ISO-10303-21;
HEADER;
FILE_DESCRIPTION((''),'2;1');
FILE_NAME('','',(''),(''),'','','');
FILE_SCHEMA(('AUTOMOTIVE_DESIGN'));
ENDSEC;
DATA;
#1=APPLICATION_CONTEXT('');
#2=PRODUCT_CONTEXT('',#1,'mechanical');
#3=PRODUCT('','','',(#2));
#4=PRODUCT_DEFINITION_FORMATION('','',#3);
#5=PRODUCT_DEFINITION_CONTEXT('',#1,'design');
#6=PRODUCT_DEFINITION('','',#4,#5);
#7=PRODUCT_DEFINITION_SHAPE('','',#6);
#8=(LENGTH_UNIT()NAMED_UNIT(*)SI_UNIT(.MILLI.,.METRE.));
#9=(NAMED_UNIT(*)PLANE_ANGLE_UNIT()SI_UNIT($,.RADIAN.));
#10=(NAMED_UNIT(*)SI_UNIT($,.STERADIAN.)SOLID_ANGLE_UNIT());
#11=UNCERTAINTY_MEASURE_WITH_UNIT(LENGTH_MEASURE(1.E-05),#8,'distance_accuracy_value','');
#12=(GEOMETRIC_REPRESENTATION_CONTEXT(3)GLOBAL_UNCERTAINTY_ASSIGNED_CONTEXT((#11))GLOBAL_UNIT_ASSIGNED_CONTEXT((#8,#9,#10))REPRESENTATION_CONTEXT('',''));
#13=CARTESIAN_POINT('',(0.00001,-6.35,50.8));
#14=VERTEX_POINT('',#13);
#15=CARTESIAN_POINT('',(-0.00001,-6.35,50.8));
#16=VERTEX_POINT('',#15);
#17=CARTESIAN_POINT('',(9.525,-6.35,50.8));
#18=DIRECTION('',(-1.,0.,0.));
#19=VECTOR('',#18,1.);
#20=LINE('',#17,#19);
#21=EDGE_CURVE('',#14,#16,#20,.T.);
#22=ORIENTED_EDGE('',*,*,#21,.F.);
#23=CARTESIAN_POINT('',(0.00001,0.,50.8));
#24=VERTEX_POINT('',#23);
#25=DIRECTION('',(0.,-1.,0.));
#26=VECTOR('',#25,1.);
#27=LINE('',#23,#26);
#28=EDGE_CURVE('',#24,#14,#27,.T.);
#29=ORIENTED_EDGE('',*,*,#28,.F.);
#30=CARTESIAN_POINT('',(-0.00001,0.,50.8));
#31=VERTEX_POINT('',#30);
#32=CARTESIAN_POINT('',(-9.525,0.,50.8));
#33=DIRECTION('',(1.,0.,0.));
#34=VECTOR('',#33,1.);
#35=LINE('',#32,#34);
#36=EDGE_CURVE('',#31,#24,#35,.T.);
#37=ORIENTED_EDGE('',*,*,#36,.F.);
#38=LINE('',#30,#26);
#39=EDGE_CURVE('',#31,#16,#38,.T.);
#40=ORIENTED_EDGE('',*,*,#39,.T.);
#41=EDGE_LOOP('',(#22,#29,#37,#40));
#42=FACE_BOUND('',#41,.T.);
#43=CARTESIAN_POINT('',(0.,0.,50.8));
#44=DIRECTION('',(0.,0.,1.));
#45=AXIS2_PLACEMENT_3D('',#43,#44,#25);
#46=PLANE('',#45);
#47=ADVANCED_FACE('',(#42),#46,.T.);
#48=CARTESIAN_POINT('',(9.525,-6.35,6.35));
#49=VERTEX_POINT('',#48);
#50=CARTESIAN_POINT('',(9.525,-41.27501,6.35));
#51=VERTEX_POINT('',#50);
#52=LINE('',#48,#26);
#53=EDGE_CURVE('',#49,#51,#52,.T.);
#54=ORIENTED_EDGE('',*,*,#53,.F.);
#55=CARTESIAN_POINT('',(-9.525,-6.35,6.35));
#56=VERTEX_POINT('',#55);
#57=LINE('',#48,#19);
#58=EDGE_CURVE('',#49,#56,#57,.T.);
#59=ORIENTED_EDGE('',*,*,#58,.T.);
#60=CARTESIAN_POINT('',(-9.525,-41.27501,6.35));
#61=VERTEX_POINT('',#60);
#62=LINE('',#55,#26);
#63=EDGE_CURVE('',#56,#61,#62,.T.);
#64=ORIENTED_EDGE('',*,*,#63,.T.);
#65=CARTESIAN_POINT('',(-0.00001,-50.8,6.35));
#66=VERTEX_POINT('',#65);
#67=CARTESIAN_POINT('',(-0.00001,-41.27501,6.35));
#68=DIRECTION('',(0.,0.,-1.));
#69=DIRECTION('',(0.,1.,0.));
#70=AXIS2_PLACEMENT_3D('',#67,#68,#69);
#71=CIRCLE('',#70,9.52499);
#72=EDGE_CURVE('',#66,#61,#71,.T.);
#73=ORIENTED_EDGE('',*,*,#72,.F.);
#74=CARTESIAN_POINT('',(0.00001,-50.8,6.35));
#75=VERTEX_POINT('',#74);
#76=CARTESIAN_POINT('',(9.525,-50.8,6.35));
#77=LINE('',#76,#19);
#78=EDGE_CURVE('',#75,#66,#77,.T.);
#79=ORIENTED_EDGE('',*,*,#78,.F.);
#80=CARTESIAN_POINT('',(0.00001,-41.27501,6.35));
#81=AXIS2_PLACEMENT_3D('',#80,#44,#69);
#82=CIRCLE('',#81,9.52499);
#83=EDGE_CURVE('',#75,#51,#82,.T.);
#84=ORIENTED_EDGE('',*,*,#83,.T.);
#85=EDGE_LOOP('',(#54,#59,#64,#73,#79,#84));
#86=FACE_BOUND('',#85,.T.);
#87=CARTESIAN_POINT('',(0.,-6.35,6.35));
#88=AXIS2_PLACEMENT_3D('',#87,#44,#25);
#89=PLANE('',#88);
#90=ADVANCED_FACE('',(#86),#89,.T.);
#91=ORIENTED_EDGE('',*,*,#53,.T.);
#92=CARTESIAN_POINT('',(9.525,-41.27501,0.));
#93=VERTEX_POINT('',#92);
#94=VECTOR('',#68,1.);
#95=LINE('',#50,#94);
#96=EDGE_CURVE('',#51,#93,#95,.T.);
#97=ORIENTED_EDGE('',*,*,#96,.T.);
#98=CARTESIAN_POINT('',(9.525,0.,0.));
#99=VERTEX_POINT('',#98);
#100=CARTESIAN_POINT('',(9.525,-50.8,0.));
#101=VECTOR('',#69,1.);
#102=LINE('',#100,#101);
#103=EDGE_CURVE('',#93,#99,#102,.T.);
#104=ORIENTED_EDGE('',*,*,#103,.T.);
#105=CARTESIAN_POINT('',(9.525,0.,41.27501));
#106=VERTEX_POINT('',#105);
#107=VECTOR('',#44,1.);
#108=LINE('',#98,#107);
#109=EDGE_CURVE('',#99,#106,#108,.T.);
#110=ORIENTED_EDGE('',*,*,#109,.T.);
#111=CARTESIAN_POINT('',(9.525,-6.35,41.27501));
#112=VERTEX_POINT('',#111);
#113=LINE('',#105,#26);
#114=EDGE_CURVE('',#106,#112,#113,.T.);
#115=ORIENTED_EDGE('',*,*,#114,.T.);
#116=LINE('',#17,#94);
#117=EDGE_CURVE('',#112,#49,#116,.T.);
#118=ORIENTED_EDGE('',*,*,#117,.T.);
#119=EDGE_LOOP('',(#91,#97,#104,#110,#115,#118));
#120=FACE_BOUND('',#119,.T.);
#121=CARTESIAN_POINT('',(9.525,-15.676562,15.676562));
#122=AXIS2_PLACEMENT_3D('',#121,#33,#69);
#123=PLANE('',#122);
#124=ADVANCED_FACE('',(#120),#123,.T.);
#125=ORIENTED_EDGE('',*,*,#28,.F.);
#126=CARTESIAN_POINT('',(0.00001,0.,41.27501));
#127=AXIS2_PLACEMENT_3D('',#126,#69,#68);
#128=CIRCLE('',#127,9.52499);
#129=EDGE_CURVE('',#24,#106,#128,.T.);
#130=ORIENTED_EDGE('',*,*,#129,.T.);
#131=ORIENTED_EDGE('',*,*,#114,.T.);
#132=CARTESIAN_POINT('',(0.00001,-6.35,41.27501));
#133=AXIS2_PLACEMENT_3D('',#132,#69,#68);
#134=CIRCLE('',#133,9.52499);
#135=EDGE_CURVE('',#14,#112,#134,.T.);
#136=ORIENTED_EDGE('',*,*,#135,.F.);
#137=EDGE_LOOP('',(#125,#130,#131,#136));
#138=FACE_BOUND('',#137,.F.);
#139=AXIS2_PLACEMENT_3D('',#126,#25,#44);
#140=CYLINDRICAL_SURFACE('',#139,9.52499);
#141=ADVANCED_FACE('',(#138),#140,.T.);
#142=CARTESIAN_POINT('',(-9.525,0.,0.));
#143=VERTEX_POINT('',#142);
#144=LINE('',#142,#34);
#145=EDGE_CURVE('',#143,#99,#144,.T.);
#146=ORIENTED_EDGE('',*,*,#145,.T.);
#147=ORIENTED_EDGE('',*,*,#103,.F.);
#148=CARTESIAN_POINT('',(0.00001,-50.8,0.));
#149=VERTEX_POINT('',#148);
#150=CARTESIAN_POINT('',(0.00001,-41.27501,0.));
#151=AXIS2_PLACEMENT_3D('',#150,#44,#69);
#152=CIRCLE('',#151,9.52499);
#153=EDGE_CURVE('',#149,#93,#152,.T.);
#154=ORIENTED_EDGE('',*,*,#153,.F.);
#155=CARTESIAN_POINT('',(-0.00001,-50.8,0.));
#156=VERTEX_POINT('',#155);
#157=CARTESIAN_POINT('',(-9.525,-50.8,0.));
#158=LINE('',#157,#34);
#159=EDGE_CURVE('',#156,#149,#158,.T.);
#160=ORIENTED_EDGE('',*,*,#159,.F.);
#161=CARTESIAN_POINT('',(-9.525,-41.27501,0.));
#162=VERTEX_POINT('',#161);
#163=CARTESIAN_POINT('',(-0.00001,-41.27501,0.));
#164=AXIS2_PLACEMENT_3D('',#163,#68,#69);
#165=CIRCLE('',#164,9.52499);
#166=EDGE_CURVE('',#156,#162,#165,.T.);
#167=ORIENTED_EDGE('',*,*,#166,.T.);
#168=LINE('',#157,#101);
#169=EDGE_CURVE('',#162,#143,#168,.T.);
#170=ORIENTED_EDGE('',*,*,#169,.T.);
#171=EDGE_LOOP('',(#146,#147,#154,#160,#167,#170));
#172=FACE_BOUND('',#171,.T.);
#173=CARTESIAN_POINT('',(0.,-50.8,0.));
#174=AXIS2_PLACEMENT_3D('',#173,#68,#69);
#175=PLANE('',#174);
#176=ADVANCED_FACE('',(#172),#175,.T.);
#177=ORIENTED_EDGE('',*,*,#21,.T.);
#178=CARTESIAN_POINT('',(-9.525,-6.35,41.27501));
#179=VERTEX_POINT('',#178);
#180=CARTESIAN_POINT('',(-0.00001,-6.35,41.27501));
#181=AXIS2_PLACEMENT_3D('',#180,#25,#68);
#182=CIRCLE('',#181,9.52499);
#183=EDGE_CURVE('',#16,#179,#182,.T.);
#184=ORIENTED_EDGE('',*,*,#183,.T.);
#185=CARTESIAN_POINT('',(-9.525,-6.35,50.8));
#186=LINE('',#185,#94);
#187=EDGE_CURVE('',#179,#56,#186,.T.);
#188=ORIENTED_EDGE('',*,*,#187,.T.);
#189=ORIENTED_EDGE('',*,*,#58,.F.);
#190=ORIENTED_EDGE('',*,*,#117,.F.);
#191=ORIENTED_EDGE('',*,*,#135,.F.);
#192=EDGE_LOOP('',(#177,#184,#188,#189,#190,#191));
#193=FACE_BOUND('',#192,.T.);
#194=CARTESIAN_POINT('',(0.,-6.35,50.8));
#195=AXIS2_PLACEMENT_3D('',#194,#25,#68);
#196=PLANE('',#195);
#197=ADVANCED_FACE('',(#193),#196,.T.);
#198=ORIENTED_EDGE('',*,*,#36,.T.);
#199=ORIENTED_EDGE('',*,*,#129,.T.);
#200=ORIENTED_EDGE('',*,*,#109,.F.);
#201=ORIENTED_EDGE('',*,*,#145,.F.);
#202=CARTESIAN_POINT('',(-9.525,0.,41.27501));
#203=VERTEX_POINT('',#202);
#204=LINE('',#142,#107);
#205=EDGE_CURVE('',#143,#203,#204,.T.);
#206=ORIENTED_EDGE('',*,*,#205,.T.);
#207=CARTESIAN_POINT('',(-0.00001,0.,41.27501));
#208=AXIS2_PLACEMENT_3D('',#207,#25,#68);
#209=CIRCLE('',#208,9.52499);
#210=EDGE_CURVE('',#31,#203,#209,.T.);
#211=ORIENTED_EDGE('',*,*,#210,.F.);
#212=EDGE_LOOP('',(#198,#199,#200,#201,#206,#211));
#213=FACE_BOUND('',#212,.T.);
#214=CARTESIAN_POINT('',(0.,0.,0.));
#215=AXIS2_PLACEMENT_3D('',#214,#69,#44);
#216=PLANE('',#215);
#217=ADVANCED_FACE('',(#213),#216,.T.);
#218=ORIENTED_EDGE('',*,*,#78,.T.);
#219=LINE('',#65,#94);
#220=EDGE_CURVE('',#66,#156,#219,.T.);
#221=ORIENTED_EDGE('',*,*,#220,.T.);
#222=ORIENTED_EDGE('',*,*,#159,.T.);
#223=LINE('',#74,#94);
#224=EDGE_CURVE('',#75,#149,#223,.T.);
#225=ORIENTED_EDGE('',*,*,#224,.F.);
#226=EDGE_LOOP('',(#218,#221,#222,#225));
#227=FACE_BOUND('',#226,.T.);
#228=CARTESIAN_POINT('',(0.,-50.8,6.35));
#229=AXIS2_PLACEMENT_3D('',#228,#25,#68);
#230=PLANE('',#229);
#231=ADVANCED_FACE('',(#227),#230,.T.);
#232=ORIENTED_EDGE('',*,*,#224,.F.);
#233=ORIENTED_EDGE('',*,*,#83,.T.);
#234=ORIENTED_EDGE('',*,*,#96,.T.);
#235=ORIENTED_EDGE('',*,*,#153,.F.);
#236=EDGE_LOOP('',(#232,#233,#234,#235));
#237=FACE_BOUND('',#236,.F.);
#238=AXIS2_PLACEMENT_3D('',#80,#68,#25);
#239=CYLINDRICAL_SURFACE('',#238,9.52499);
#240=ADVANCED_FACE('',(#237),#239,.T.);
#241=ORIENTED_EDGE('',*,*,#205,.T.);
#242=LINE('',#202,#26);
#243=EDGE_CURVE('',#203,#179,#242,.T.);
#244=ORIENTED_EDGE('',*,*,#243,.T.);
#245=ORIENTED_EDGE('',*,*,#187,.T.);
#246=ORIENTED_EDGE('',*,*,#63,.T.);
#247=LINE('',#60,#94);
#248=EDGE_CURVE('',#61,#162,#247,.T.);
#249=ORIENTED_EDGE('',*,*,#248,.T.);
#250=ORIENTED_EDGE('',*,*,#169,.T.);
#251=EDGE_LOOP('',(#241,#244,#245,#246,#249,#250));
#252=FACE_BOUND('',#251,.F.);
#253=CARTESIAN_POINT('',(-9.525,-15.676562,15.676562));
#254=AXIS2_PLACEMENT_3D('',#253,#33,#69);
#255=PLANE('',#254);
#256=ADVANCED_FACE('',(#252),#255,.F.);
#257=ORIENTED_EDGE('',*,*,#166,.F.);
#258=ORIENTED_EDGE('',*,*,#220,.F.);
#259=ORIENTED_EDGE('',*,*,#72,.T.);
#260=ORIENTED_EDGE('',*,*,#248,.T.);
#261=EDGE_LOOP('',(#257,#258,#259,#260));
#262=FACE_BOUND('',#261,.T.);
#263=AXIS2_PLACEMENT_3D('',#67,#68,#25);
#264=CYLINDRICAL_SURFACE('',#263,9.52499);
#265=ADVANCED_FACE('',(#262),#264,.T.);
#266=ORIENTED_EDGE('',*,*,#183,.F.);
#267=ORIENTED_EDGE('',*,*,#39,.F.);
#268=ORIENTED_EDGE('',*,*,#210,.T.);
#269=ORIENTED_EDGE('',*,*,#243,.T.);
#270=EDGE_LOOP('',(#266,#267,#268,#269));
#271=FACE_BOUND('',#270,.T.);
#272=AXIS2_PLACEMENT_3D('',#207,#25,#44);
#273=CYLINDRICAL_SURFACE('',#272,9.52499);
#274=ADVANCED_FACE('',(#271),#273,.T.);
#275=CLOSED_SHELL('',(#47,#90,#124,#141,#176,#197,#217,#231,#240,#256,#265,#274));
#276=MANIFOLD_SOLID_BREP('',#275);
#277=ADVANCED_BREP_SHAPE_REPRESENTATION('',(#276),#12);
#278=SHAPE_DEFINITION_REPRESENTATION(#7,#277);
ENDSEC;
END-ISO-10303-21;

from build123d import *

# Parameters (mm, degrees)
F1_DEPTH = 9.525
F2_R     = 9.52499


# Not quite as in the source:
# - a fillet or chamfer is up to 0.001 mm smaller than in the source, because OpenCascade refuses the exact size


with BuildPart() as f1:
    # F0 (on Right) → F1 (new body, symmetric)
    with BuildSketch(Plane.YZ):
        Polygon((-50.8, 6.35), (-50.8, 0), (0, 0), (0, 50.8), (-6.35, 50.8), (-6.35, 6.35), align=None)
    extrude(amount=F1_DEPTH, both=True)

    # F2 (radius 9.525 in the source; OpenCascade refuses exactly that, so slightly less here)
    f2_edges = [f1.edges().sort_by_distance(p)[0] for p in [
        (9.525, -3.175, 50.8),
        (-9.525, -3.175, 50.8),
        (9.525, -50.8, 3.175),
        (-9.525, -50.8, 3.175),
    ]]
    fillet(f2_edges, radius=F2_R)


solid = f1.part
